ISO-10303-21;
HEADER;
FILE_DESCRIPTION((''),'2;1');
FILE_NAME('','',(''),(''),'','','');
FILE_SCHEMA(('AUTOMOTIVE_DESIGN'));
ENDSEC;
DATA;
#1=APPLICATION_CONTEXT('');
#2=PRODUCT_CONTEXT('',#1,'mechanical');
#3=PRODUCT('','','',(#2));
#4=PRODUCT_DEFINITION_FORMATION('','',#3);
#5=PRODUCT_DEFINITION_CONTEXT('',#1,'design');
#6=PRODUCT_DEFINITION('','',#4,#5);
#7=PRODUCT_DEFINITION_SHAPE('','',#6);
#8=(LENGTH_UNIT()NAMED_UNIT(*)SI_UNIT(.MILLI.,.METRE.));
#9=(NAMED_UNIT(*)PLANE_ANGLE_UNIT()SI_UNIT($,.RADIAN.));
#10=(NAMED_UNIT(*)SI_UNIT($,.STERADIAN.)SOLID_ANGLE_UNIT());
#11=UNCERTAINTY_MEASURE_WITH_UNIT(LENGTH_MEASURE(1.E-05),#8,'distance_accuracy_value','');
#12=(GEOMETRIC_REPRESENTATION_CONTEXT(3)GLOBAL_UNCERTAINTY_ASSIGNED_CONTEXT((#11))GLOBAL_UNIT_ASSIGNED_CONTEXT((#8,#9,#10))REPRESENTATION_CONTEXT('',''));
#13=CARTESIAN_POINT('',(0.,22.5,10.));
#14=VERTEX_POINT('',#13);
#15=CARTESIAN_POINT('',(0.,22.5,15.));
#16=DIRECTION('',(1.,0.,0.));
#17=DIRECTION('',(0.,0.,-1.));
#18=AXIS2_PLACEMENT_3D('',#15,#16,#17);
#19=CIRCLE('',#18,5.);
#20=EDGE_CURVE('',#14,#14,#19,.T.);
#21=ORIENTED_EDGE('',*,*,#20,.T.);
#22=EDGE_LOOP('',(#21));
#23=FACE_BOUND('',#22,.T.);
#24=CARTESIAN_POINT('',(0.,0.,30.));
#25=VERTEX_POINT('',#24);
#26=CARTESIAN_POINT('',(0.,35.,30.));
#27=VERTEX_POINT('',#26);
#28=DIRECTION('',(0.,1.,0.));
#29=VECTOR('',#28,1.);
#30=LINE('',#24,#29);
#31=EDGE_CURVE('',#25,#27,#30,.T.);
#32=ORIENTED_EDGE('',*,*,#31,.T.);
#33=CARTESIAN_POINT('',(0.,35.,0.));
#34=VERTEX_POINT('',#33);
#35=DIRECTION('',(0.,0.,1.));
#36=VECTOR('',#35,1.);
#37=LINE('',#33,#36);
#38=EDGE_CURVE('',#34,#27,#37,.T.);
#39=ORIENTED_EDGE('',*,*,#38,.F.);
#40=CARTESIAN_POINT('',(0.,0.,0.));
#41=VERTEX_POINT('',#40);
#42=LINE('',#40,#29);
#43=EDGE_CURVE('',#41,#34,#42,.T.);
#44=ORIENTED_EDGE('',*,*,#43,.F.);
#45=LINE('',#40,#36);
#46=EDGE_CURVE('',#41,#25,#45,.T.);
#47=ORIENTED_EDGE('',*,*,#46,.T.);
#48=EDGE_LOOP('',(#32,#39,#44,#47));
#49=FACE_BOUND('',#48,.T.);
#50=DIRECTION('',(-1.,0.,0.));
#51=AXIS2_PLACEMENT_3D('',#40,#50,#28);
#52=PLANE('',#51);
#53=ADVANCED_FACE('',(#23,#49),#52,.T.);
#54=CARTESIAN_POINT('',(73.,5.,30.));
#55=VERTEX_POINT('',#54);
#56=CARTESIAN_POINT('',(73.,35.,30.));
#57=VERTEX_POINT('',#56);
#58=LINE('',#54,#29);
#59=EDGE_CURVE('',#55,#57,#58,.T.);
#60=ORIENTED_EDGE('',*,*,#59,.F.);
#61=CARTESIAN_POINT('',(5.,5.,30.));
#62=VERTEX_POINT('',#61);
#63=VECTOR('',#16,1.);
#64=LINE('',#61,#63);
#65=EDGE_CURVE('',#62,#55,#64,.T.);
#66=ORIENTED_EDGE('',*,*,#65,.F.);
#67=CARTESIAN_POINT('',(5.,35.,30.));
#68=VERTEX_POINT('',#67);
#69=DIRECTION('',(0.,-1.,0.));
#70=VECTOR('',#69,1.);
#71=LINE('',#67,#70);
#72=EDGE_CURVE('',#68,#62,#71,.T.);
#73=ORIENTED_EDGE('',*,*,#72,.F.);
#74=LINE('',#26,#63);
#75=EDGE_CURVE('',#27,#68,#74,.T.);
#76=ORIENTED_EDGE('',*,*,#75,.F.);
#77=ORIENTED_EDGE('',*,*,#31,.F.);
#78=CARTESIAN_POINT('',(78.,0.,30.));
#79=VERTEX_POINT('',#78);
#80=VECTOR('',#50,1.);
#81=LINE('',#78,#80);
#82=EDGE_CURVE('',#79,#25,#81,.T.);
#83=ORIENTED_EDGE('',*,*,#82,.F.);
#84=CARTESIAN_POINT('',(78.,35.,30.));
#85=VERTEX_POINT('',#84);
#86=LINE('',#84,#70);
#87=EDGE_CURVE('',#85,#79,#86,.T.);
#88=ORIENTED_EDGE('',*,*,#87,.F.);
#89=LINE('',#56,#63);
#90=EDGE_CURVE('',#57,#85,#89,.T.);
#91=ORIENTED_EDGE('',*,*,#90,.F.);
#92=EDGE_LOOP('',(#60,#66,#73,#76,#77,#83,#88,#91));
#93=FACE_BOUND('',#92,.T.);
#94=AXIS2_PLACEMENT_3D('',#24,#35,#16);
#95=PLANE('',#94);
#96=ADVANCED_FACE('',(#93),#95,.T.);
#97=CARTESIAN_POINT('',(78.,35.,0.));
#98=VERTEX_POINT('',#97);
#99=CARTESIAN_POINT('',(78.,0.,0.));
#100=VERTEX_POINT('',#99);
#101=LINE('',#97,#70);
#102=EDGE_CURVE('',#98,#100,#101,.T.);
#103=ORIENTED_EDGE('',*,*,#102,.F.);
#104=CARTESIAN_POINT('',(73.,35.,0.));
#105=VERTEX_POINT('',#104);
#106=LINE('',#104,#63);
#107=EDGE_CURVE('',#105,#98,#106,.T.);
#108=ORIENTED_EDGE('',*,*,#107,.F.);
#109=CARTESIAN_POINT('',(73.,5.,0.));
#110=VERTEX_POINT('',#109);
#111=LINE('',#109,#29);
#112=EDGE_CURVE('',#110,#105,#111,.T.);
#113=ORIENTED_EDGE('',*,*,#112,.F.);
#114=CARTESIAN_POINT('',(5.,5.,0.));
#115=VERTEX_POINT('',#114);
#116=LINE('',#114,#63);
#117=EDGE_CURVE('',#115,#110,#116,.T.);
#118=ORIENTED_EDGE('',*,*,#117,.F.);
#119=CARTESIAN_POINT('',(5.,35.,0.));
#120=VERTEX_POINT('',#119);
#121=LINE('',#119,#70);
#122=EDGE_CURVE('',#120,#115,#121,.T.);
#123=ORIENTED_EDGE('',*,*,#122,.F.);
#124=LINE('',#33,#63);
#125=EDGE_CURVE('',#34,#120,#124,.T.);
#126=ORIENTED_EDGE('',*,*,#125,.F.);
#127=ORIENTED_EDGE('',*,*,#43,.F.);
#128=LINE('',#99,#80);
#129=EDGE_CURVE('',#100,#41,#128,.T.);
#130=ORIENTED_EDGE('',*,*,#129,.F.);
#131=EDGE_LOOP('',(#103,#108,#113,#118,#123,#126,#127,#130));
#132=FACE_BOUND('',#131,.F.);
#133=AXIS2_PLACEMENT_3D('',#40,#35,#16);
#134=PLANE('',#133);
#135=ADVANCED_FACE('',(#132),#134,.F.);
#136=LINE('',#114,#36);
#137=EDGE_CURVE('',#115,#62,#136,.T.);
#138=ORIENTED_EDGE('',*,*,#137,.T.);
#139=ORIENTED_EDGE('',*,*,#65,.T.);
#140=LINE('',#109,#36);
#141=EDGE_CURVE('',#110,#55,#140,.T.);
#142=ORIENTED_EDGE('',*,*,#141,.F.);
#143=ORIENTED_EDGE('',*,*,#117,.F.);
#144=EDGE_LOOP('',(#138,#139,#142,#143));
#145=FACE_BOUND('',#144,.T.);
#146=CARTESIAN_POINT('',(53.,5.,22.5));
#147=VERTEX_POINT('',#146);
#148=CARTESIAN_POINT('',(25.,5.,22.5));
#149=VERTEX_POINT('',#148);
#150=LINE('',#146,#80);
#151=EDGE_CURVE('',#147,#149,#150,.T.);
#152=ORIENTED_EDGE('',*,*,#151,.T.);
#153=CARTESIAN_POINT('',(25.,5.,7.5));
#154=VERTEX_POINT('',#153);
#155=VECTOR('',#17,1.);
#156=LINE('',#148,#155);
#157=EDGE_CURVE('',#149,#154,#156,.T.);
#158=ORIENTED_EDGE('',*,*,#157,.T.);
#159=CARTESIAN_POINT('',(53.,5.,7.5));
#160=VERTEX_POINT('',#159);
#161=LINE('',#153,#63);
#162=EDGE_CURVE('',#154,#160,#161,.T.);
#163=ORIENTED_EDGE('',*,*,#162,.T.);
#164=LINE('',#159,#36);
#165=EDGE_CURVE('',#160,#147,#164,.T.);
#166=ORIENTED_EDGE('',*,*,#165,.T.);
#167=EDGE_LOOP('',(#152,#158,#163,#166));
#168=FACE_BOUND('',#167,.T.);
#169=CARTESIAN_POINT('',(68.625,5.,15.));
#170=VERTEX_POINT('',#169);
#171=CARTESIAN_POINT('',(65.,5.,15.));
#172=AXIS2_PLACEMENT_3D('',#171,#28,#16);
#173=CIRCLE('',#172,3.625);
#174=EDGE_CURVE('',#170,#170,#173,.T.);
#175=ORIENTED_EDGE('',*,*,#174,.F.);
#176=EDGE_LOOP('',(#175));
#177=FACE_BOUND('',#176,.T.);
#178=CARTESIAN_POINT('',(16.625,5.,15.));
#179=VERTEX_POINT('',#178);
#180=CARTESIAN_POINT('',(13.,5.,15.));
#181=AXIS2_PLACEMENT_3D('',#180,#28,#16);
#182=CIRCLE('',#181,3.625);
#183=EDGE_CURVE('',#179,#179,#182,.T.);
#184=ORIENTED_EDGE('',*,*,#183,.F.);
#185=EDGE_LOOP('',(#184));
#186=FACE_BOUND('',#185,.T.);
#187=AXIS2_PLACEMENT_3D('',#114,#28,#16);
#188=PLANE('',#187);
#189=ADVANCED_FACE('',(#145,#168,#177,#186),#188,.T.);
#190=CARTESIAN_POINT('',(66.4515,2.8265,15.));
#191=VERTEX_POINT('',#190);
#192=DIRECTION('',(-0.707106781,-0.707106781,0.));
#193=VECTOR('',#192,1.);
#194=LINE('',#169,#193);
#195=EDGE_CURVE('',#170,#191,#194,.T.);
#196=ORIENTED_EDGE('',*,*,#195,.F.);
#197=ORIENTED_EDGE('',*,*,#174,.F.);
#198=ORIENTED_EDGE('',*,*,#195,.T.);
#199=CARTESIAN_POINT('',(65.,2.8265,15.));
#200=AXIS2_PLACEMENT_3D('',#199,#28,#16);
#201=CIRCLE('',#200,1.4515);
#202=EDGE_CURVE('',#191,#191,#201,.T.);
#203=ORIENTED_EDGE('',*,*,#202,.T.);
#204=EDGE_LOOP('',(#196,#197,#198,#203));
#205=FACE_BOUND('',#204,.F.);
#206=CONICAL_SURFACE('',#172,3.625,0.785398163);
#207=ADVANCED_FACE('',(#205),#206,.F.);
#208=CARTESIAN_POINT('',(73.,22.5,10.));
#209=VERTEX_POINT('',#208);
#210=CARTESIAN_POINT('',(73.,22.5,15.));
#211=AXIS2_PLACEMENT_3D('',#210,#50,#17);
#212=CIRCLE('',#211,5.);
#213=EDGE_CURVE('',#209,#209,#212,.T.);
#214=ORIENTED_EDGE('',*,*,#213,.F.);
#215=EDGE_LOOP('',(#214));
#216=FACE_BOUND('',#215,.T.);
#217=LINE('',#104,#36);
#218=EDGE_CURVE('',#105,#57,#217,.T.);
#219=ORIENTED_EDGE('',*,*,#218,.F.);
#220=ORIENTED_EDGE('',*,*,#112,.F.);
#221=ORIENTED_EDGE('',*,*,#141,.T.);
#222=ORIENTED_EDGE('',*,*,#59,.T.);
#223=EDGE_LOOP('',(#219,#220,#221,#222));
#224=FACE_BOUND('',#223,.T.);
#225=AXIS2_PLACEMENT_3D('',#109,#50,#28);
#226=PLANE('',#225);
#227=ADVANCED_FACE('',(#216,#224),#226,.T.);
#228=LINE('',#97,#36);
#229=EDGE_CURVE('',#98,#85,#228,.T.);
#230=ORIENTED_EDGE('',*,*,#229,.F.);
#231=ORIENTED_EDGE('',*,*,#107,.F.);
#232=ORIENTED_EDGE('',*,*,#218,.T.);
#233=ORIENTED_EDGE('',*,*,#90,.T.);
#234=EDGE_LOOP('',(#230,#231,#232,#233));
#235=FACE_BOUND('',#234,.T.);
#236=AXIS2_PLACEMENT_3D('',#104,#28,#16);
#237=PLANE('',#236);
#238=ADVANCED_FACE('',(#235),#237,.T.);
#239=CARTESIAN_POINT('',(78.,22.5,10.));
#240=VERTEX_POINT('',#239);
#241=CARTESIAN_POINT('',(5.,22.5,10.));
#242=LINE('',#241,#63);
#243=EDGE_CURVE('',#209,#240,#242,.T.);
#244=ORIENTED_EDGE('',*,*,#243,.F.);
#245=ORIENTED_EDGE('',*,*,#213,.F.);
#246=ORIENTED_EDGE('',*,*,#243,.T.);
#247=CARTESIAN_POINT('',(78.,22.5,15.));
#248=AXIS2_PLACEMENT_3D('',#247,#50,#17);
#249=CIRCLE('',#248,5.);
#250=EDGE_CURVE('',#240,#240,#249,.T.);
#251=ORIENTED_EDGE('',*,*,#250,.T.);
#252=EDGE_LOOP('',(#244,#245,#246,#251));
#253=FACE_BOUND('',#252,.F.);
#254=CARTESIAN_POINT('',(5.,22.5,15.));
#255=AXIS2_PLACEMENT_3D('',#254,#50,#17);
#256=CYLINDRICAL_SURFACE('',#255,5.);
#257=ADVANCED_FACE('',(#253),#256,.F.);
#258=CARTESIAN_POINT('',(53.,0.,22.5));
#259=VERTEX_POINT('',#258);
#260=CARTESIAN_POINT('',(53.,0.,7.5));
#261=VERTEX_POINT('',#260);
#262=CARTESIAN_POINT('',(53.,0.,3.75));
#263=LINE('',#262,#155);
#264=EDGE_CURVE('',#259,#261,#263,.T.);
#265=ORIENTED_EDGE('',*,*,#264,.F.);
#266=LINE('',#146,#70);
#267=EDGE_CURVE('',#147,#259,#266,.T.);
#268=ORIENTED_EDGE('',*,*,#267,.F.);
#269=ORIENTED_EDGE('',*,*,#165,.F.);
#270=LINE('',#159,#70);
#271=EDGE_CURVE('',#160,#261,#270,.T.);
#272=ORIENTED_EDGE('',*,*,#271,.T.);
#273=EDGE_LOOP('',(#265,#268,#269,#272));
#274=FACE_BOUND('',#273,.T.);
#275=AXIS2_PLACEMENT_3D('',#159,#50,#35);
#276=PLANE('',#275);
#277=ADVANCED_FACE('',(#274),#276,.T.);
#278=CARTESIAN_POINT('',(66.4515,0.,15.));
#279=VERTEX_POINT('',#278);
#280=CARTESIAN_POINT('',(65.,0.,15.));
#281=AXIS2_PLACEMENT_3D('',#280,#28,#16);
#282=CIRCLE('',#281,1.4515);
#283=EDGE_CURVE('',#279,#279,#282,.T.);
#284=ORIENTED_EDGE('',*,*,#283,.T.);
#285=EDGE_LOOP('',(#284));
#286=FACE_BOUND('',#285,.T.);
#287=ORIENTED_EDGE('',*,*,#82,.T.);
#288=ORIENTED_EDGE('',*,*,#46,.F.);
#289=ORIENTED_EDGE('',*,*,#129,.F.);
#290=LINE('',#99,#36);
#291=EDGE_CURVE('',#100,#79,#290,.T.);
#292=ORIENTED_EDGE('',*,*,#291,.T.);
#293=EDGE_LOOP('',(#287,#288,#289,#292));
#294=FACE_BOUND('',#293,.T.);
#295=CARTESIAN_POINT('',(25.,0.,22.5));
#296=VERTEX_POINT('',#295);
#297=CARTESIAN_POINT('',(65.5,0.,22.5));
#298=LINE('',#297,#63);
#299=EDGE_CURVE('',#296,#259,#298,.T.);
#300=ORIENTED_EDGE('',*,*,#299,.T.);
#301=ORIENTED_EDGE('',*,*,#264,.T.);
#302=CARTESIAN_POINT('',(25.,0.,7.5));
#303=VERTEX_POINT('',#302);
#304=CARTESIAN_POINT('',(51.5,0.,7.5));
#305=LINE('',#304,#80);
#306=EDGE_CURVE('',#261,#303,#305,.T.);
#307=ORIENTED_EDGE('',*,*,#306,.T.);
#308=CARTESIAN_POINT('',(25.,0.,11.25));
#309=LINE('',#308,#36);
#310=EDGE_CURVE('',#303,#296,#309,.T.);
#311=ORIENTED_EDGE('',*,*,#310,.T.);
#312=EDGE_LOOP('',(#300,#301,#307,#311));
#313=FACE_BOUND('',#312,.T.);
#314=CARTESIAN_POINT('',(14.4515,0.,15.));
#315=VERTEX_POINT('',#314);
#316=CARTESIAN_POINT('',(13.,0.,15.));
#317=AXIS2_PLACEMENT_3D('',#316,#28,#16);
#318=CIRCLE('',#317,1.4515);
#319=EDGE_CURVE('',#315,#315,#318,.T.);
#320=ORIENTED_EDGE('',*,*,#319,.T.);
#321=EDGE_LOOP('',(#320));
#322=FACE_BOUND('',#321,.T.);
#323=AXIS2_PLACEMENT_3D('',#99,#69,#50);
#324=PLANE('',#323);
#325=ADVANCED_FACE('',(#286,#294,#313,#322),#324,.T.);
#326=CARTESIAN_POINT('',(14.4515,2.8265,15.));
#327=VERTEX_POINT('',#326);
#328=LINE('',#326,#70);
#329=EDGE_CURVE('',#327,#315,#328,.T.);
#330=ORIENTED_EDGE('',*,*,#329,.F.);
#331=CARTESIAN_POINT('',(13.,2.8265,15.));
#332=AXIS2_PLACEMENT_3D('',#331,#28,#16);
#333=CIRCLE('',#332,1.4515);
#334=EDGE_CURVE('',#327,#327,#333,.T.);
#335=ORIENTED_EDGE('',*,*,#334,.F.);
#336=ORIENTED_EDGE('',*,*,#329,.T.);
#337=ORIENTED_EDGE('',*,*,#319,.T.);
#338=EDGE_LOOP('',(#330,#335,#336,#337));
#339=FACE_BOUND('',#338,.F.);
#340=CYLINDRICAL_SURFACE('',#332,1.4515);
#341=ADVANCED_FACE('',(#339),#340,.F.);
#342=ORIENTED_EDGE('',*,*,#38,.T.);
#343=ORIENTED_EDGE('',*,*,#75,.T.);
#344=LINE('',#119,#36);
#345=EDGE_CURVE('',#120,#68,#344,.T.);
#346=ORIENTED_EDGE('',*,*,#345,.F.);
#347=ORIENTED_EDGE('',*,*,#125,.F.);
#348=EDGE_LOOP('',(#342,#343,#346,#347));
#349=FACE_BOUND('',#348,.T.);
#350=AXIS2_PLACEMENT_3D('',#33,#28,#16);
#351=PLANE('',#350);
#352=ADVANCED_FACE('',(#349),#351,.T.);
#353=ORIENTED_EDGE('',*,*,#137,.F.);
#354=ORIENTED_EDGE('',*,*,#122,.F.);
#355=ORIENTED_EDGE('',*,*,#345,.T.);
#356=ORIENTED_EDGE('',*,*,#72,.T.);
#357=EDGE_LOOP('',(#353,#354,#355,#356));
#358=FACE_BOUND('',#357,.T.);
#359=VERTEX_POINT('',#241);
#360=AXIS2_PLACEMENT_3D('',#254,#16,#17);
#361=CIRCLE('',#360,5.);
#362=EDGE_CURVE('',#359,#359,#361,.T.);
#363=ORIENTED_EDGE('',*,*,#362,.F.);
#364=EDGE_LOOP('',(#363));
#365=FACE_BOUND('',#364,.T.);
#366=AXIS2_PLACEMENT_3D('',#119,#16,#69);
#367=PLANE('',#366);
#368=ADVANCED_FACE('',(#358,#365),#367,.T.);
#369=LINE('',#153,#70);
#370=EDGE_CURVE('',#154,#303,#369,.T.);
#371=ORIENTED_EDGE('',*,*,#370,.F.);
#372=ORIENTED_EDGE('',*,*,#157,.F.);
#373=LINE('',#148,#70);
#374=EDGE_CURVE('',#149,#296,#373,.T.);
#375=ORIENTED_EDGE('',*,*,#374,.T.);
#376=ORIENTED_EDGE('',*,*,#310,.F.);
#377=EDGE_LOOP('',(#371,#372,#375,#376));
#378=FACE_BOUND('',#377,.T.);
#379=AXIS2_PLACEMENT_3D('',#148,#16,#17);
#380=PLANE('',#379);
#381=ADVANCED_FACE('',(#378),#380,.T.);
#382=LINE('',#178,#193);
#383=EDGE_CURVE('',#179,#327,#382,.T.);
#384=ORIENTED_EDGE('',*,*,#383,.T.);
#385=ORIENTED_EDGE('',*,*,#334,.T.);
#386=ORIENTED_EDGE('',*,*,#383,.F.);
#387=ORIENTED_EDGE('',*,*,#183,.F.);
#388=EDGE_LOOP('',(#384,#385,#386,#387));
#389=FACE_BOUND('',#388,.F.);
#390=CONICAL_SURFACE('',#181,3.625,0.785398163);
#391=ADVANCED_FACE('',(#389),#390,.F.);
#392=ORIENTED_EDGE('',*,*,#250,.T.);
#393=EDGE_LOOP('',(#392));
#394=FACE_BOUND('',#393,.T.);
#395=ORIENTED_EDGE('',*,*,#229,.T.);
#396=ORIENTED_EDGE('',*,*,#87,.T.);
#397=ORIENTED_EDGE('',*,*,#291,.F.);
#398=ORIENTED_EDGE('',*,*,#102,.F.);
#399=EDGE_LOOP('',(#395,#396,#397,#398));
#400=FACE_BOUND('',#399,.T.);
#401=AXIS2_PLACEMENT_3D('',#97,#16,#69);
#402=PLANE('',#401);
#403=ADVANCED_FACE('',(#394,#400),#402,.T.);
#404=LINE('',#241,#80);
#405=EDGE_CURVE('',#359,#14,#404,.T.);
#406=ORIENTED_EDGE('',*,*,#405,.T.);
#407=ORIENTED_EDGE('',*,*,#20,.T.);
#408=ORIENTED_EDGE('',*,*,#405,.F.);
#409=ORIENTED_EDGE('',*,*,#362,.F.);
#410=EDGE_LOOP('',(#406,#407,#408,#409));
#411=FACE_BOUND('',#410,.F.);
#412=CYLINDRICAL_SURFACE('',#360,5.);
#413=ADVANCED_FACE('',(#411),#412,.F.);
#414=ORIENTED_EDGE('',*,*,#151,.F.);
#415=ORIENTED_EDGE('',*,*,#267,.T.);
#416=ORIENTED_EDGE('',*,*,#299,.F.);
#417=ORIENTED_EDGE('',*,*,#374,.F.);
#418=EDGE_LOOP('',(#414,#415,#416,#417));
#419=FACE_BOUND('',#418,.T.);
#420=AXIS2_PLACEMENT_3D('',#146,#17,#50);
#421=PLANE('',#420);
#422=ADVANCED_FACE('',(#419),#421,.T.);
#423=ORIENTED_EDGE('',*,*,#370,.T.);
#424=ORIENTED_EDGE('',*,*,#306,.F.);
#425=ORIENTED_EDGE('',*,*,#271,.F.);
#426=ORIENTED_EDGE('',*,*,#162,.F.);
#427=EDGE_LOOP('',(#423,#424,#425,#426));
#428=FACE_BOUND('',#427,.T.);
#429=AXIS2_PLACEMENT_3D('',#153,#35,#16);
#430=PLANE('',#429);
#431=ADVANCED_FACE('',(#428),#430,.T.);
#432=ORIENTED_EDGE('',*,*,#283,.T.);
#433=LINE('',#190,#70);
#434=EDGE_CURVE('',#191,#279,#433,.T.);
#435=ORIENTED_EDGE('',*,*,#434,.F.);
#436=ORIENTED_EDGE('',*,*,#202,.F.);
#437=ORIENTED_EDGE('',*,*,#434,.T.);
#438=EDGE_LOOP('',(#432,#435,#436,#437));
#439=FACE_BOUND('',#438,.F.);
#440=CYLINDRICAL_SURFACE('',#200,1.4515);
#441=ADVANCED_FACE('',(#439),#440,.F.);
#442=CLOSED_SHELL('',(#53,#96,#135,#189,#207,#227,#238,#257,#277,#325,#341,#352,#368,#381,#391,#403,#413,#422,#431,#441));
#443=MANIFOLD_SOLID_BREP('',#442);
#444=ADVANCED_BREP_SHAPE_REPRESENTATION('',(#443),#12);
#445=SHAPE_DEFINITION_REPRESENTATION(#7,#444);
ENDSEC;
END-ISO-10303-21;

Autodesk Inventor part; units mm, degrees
ref_plane "YZ Plane" through (0, 0, 0) normal (1, 0, 0) x (0, 1, 0)
ref_plane "XZ Plane" through (0, 0, 0) normal (0, 1, 0) x (-1, 0, 0)
ref_plane "XY Plane" through (0, 0, 0) normal (0, 0, 1) x (1, 0, 0)
sketch "Sketch1" plane through (0, 0, 0) normal (0, 0, 1) x (1, 0, 0)
  line L0 (0, 0) -> (0, 35)
  line L1 (0, 35) -> (5, 35)
  line L2 (5, 35) -> (5, 5)
  line L3 (5, 5) -> (73, 5)
  line L4 (73, 5) -> (73, 35)
  line L5 (73, 35) -> (78, 35)
  line L6 (78, 35) -> (78, 0)
  line L7 (78, 0) -> (0, 0)
  dimension "d0" = 35
  dimension "d1" = 5
  dimension "d2" = 30
  dimension "d3" = 68
  dimension "d4" = 5
extrude "Extrusion1" add sketch "Sketch1" along normal blind 30
sketch "Sketch2" plane through (5, 5, 0) normal (1, 0, 0) x (0, 0, -1)
  circle A0 centre (-15, 17.5) radius 5
  line L0 (0, -5) -> (0, 30) projected
  line L1 (0, 30) -> (-30, 30) projected
  dimension "d7" = 10
  dimension "d8" = 15
  dimension "d9" = 12.5
extrude "Extrusion2" cut sketch "Sketch2" along normal mid plane 1000
sketch "Sketch3" plane through (5, 5, 0) normal (0, 1, 0) x (1, 0, 0)
  circle A0 centre (8, -15) radius 3.625
  line L0 (68, 0) -> (0, 0) projected
  line L1 (0, 0) -> (0, -30) projected
  circle A1 centre (60, -15) radius 3.625
  line L2 (68, 0) -> (68, -30) projected
  point P0 (-5, 0)
  dimension "d12" = 7.25
  dimension "d13" = 15
  dimension "d14" = 8
  dimension "d15" = 7.25
  dimension "d16" = 8
  dimension "d17" = 15
extrude "Extrusion3" cut sketch "Sketch3" against normal blind 2.1735 draft -45
sketch "Sketch4" plane through (13, 2.8265, 15) normal (0, 1, 0) x (1, 0, 0)
  circle A0 centre (0, 0) radius 1.4515 projected
  circle A1 centre (0, 0) radius 1.4515
  circle A2 centre (52, 0) radius 1.4515 projected
  circle A3 centre (52, 0) radius 1.4515
  point P0 (-13, 15)
extrude "Extrusion4" cut sketch "Sketch4" against normal blind 10
sketch "Sketch5" plane through (5, 5, 0) normal (0, 1, 0) x (1, 0, 0)
  line L0 (20, -7.5) -> (48, -7.5)
  line L1 (48, -7.5) -> (48, -22.5)
  line L2 (48, -22.5) -> (20, -22.5)
  line L3 (20, -22.5) -> (20, -7.5)
  line L4 (20, -7.5) -> (48, -22.5) construction
  line L5 (48, -7.5) -> (20, -22.5) construction
  line L6 (68, 0) -> (0, 0) projected
  line L7 (0, 0) -> (0, -30) projected
  point P0 (-5, 0)
  point P1 (34, -15)
  dimension "d22" = 28
  dimension "d23" = 15
  dimension "d24" = 15
  dimension "d25" = 34
extrude "Extrusion5" cut sketch "Sketch5" against normal through all
properties part number "1st arm to next clamp"
